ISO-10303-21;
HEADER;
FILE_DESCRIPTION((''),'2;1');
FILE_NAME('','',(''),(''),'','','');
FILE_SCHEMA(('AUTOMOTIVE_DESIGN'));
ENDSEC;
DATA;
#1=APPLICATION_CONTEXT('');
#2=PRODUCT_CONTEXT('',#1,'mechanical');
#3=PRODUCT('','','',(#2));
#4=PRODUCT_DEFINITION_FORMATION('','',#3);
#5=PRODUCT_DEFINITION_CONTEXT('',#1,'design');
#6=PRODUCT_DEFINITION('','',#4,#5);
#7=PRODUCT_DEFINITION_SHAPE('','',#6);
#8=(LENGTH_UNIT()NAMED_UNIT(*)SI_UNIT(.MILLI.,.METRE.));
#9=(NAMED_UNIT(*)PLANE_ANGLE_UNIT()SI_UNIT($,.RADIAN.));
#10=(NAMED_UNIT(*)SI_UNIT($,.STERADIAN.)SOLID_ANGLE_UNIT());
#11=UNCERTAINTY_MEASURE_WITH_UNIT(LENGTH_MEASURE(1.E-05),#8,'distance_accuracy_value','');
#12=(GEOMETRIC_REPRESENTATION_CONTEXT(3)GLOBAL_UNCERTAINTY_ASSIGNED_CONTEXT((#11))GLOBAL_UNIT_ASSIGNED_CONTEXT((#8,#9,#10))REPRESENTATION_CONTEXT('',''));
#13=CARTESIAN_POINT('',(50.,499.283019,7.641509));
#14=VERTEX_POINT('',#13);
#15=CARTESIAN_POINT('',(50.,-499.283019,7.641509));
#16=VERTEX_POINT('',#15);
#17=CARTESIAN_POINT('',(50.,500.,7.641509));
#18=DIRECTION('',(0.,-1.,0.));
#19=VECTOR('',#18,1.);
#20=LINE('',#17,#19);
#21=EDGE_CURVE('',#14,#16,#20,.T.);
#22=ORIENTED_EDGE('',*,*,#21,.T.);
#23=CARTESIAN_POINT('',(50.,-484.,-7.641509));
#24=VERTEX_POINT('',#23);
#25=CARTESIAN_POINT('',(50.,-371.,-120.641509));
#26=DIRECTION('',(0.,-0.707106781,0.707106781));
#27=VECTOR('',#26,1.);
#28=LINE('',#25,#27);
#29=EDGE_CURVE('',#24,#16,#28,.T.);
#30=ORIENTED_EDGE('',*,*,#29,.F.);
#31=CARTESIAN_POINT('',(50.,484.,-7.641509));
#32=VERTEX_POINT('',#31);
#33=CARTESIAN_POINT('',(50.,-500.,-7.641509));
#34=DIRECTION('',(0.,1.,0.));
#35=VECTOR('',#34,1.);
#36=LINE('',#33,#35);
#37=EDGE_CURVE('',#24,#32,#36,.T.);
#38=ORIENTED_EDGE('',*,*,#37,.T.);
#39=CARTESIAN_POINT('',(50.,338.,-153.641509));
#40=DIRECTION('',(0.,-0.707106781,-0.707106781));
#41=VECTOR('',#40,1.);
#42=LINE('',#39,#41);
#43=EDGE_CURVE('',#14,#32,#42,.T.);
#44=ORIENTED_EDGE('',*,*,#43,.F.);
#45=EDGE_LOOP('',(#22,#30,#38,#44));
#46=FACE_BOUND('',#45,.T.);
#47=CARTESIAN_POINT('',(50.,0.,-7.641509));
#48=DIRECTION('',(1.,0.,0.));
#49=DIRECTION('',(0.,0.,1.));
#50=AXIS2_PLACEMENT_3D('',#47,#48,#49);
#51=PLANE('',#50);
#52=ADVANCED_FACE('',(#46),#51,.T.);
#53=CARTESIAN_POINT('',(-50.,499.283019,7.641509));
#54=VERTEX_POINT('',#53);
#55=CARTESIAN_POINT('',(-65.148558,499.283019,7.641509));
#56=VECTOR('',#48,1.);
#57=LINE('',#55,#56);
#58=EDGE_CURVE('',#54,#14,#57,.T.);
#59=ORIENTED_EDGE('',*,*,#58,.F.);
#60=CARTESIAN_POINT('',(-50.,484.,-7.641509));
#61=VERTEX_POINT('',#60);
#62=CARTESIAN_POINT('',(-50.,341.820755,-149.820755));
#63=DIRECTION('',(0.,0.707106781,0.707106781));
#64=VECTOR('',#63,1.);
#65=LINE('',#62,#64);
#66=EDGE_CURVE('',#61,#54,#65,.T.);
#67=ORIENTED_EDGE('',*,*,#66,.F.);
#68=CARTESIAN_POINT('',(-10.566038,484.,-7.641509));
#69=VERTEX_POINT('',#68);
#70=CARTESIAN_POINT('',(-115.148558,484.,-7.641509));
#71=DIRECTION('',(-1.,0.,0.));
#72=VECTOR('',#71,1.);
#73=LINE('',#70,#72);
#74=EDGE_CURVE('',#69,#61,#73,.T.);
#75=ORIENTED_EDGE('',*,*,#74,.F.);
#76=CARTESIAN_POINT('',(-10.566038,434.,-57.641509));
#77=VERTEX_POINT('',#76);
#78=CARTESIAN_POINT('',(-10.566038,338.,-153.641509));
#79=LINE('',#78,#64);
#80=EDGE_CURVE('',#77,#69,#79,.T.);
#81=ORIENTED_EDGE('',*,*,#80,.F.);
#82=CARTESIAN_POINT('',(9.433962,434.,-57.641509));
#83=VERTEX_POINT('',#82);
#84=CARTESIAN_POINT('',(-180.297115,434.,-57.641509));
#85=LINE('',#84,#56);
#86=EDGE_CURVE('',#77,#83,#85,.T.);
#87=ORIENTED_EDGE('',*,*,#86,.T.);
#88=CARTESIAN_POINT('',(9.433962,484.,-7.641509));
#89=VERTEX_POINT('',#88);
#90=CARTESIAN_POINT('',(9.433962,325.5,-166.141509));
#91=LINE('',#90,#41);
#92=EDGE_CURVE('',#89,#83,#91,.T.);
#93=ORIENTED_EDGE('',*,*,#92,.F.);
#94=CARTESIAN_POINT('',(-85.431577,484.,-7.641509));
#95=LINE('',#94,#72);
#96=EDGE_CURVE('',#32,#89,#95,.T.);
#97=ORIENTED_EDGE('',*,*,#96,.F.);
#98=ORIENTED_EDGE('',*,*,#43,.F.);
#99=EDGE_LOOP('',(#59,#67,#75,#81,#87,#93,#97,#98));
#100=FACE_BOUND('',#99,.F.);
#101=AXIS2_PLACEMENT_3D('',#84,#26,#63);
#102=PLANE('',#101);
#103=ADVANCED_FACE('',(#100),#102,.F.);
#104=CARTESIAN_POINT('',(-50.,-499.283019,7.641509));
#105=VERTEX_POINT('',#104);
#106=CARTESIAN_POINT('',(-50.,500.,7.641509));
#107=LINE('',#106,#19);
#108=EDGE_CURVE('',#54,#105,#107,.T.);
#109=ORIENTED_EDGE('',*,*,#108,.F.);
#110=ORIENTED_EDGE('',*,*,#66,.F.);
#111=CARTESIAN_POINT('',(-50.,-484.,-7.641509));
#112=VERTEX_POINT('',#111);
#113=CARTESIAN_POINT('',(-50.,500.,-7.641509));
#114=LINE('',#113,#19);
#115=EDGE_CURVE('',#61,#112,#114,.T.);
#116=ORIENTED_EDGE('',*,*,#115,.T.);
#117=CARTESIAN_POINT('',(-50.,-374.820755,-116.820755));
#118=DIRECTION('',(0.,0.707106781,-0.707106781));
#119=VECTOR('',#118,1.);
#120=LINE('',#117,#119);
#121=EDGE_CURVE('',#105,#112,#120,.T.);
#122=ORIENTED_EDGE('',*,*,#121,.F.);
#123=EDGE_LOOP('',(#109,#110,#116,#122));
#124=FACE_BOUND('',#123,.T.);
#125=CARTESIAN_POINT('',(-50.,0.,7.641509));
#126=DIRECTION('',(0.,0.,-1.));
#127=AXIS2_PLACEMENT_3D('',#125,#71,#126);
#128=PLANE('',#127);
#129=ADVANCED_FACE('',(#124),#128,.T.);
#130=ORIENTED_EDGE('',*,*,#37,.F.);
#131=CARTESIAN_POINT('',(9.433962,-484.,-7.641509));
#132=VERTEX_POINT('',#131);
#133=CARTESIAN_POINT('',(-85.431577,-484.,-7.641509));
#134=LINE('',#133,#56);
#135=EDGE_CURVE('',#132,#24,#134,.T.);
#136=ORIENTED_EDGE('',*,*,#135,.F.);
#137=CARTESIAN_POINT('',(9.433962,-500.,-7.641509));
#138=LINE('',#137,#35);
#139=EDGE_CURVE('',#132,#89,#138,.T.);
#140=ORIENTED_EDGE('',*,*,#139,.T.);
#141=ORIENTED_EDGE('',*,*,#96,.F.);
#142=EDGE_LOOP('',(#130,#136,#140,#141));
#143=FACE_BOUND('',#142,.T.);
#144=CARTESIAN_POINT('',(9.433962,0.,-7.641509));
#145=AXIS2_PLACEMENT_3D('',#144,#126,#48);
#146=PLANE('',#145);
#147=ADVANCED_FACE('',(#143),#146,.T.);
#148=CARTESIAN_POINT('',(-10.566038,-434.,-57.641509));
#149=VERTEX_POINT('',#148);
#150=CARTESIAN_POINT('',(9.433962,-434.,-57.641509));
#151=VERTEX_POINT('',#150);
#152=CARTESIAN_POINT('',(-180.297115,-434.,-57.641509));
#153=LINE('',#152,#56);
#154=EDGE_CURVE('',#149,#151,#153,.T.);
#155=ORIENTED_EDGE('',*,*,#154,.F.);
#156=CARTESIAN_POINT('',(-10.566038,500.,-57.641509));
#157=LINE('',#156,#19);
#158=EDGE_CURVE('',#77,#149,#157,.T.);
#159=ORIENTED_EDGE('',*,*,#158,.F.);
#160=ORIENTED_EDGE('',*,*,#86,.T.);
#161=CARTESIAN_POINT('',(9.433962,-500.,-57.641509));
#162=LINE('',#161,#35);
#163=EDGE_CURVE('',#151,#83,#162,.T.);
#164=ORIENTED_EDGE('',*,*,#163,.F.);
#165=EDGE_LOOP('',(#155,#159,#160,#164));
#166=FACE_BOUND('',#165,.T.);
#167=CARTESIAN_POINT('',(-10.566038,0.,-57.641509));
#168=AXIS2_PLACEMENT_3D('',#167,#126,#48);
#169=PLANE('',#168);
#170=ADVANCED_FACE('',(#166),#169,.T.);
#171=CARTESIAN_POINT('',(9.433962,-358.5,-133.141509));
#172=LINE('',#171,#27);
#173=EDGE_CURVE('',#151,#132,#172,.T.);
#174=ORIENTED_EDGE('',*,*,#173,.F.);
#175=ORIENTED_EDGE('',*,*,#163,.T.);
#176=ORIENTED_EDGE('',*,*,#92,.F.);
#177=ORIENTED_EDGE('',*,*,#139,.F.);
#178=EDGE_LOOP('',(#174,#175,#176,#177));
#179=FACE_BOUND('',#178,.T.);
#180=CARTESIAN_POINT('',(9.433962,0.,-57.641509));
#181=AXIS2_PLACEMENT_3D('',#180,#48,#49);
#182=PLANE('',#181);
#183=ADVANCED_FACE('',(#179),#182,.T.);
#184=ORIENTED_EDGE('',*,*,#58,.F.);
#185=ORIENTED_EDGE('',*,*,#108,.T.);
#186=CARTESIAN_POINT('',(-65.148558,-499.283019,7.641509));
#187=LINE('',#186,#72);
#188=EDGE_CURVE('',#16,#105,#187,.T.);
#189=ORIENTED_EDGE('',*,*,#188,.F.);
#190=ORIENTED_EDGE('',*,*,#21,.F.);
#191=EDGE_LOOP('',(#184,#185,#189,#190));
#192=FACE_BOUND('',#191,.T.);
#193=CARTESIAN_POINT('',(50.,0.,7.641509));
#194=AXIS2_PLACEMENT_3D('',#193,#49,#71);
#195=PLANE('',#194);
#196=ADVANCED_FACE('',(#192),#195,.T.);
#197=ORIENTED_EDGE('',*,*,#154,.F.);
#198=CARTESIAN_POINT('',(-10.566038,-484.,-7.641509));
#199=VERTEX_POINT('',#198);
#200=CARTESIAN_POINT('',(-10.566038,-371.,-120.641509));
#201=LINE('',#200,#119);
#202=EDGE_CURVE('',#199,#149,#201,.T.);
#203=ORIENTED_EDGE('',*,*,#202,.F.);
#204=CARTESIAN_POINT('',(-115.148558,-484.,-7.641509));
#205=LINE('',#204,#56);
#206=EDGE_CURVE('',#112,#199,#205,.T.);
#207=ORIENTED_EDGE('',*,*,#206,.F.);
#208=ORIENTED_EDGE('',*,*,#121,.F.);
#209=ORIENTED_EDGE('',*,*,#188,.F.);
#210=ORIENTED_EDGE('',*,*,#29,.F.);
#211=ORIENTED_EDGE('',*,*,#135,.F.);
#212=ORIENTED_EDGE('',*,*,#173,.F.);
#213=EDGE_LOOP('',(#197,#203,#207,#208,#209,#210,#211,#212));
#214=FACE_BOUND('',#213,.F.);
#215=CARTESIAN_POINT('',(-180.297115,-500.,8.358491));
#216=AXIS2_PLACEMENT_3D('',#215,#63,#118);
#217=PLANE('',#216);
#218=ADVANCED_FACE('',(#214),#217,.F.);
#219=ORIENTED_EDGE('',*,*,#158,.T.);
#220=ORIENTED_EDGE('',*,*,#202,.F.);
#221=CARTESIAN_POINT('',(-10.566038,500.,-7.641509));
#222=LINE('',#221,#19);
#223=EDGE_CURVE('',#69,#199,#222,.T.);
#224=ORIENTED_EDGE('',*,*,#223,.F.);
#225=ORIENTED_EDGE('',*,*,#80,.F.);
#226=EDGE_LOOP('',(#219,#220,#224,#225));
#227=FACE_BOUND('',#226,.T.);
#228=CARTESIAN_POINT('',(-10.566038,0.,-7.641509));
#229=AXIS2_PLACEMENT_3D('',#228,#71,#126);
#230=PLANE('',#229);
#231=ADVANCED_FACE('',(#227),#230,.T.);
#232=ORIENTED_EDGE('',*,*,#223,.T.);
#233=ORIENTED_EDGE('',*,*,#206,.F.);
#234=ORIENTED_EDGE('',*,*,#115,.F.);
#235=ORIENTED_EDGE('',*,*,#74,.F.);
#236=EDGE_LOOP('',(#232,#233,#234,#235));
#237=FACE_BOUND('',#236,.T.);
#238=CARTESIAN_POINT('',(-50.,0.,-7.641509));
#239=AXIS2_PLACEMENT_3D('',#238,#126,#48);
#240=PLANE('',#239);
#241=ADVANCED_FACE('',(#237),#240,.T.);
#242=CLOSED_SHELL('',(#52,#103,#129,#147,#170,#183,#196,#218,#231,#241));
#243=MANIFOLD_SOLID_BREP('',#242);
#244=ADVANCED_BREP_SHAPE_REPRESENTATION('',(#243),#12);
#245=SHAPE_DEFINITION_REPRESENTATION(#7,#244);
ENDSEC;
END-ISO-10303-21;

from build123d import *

# Parameters (mm, degrees)
F1_DEPTH    = 500
F2_T1_DEPTH = 359.4621544115
F3_T1_DEPTH = 359.4621544115


# Not quite as in the source:
# - a fillet or chamfer that OpenCascade refuses, or shapes differently, is made with other operations: its cross-section is extruded or revolved along the edge and cut away or added


with BuildPart() as f1:
    # F0 (on Front) → F1 (new body, symmetric)
    with BuildSketch(Plane.XZ):
        Polygon((50, -7.6415093219), (50, 7.6415093219), (-50, 7.6415093219), (-50, -7.6415093219), (-10.5660382013, -7.6415093219), (-1.1320764027, -7.6415093219), (0, -7.6415093219), (9.4339617987, -7.6415093219), align=None)
        Polygon((9.4339617987, -57.6415093219), (9.4339617987, -7.6415093219), (0, -7.6415093219), (-1.1320764027, -7.6415093219), (-10.5660382013, -7.6415093219), (-10.5660382013, -57.6415093219), align=None)
    extrude(amount=F1_DEPTH, both=True)

    # F2: chamfer of 66 on 1 edges, made by hand

    # F2_s2 → F2_t1 (cut)
    with BuildSketch(Plane.YZ.offset(-180.2971154071)):
        Polygon((434, -57.6415093219), (500, 8.3584906781), (500, -57.6415093219), align=None)
    extrude(amount=F2_T1_DEPTH, mode=Mode.SUBTRACT)

    # F3: chamfer of 66 on 1 edges, made by hand

    # F3_s2 → F3_t1 (cut)
    with BuildSketch(Plane.YZ.offset(-180.2971154071)):
        Polygon((-500, 8.3584906781), (-434, -57.6415093219), (-500, -57.6415093219), align=None)
    extrude(amount=F3_T1_DEPTH, mode=Mode.SUBTRACT)


solid = f1.part
